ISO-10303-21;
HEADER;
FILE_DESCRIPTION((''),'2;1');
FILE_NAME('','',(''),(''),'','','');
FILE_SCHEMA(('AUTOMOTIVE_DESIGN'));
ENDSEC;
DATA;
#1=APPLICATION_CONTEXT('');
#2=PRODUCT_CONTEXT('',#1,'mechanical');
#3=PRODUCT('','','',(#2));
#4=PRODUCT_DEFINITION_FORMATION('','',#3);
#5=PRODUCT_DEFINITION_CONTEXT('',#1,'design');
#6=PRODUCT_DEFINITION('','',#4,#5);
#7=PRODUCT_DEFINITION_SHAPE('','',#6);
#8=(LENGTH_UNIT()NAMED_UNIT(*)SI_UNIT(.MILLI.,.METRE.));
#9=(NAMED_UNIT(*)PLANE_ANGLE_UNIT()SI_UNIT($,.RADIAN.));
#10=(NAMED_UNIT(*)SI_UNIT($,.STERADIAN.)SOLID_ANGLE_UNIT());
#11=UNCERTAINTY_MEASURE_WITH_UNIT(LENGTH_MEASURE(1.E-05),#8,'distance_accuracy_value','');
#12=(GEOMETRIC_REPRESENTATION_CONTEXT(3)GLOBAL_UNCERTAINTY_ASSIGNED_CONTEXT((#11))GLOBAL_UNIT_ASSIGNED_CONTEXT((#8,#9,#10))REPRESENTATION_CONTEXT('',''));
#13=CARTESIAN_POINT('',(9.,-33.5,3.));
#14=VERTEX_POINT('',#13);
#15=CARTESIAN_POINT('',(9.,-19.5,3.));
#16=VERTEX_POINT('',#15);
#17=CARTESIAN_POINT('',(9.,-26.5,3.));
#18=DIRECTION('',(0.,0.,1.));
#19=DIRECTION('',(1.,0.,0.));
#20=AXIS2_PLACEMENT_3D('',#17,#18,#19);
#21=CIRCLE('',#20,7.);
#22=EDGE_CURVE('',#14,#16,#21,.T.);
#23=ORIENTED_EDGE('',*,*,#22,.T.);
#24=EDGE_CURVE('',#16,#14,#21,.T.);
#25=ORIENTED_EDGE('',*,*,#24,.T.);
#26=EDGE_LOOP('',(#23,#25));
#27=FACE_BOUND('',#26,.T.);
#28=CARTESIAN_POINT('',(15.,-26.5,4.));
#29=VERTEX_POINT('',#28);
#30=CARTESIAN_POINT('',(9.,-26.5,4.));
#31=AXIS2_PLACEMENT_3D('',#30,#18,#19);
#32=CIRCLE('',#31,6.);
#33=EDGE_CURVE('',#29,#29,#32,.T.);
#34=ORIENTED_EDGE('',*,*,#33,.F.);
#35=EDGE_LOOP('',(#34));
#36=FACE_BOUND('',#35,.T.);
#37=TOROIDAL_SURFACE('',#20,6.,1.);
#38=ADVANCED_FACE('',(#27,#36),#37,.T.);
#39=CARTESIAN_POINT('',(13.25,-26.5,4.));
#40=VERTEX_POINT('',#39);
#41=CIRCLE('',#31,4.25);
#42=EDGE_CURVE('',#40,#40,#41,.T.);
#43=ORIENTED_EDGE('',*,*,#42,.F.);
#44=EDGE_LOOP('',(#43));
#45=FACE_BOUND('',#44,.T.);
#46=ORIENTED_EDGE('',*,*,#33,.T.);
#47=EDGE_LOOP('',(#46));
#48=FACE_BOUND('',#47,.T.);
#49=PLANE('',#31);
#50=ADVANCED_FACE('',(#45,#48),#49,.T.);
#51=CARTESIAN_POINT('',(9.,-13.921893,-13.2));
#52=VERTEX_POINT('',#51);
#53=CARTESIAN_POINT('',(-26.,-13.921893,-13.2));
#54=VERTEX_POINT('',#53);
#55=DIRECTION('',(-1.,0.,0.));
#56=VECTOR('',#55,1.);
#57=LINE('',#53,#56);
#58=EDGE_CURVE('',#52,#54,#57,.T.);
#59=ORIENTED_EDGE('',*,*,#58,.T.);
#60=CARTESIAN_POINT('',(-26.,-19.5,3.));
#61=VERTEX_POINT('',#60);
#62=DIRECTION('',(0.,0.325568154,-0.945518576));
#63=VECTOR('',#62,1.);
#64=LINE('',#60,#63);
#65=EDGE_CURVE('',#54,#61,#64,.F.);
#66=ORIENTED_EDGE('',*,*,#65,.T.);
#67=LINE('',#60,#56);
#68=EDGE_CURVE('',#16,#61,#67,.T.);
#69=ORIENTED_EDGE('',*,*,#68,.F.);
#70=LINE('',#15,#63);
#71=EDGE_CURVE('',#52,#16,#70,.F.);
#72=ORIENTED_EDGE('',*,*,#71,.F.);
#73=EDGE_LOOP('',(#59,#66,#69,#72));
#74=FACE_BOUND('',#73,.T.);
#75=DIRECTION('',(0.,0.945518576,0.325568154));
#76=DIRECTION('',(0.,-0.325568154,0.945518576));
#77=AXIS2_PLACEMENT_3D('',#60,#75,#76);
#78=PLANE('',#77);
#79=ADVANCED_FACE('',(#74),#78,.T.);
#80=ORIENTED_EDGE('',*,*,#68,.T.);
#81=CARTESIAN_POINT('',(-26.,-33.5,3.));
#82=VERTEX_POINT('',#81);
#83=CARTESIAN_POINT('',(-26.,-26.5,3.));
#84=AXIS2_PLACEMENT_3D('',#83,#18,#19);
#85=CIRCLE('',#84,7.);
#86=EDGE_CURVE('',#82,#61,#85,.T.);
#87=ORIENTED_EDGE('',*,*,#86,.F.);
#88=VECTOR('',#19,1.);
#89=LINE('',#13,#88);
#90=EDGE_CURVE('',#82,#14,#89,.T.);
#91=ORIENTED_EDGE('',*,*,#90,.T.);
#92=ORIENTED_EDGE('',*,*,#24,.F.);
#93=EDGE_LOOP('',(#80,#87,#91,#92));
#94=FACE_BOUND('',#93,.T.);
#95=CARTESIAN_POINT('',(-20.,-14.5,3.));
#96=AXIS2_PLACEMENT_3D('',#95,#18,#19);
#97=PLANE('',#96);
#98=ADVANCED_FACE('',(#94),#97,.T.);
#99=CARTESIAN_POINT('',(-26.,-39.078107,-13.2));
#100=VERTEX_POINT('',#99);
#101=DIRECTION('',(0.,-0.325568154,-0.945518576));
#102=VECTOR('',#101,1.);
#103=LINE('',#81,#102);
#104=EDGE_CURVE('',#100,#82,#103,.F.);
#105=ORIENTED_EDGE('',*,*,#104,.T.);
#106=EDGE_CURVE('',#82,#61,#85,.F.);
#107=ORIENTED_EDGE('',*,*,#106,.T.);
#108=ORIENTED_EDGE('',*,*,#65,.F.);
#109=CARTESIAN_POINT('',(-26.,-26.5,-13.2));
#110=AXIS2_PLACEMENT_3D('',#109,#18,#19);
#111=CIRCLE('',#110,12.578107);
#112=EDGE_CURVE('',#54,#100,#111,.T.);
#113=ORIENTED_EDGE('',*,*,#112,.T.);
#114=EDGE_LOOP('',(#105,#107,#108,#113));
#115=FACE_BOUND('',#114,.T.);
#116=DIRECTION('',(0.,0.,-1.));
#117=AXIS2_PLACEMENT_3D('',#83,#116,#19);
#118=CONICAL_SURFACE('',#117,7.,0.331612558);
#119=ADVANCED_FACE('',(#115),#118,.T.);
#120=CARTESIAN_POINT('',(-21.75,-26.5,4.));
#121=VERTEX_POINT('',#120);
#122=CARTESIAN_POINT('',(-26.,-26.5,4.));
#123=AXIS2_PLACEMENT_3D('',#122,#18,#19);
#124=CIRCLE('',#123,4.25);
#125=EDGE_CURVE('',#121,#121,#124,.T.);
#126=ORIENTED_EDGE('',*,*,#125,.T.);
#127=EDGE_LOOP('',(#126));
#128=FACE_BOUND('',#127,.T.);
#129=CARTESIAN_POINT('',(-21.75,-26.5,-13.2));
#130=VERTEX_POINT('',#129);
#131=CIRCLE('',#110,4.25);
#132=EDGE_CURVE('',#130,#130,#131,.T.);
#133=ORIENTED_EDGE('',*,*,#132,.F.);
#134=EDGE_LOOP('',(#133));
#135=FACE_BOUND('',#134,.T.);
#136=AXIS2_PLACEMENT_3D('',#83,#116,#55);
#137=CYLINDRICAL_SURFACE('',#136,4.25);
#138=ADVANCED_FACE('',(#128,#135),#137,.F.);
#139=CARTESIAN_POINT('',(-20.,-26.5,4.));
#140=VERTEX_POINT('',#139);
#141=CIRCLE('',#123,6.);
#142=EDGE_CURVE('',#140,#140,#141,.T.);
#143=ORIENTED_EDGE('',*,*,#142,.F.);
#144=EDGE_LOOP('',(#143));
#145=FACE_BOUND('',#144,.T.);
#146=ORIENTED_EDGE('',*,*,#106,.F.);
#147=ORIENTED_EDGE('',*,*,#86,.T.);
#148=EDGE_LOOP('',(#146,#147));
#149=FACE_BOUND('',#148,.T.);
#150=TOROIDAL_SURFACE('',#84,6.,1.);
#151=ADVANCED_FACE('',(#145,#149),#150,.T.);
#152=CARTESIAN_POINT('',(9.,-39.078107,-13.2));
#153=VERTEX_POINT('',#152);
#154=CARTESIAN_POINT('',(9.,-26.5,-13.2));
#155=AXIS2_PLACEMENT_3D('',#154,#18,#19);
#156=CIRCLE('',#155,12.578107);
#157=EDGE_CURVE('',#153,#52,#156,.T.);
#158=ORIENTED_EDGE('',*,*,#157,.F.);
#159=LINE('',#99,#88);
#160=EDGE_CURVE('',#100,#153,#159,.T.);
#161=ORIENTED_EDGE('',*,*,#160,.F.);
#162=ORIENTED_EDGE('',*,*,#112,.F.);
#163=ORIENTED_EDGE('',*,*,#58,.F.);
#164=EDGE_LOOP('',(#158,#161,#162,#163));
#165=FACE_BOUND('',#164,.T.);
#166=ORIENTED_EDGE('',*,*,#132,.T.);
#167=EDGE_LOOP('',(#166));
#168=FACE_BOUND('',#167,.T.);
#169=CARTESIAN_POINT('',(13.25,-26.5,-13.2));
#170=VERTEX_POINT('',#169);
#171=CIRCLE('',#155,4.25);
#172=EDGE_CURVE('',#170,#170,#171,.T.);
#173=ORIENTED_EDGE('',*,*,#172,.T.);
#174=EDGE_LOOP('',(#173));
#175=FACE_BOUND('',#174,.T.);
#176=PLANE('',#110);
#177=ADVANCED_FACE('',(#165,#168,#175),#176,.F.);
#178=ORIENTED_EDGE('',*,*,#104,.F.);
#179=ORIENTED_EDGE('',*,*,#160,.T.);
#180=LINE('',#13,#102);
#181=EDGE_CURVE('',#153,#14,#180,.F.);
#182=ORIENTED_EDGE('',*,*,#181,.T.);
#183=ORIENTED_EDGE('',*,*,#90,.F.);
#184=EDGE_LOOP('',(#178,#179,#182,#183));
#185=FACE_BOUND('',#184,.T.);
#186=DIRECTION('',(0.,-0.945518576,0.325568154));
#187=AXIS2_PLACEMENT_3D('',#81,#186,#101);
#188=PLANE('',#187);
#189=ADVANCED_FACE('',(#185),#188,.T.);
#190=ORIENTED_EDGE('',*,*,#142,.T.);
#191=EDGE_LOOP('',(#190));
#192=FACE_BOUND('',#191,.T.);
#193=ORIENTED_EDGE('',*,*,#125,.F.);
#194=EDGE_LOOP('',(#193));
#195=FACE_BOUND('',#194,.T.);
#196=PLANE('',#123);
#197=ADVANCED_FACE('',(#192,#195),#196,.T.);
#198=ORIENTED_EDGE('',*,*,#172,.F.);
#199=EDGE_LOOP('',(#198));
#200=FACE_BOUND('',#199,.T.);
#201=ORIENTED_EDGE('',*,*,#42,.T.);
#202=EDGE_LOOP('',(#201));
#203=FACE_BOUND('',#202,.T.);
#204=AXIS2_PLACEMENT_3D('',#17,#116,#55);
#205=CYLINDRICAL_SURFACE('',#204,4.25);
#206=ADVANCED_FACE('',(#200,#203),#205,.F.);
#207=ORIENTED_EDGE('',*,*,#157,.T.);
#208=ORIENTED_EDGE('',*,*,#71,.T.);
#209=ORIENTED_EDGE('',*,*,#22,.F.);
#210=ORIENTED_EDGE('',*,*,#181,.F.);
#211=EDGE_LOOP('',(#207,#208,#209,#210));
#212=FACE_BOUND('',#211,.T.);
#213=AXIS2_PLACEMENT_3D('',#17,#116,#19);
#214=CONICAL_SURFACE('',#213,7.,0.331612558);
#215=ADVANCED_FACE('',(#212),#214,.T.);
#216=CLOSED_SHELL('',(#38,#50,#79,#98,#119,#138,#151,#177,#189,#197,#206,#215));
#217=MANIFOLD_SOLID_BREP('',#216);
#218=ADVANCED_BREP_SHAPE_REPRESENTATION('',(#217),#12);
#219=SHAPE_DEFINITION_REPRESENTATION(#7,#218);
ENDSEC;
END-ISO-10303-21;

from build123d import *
from build123d.topology import SkipClean

# Parameters (mm, degrees)
SKETCH1_R           = 4.25
SKETCH1_W           = 20
SKETCH1_H           = 5
BOSS_EXTRUDE1_DEPTH = 3
SKETCH2_R           = 7
SKETCH2_R_2         = 4.25
BOSS_EXTRUDE2_DEPTH = 1
FILLET1_R           = 1
CUT_EXTRUDE1_DEPTH  = 48.11952886
BOSS_EXTRUDE3_DEPTH = 16.2
BOSS_EXTRUDE3_DRAFT = 19
SKETCH5_R           = 4.25
CUT_EXTRUDE2_DEPTH  = 58.252151387


with BuildPart() as part:
    # Sketch1 → Boss-Extrude1 (new body)
    with BuildSketch(Plane.XY):
        with BuildLine():
            Line((9, -33.5), (-26, -33.5))
            ThreePointArc((-26, -33.5), (-33, -26.5), (-26, -19.5))
            Line((-26, -19.5), (-20, -19.5))
            ThreePointArc((-20, -19.5), (-16.464466094, -18.035533906), (-15, -14.5))
            Line((-15, -14.5), (-15, 28.5))
            ThreePointArc((-15, 28.5), (-13.535533906, 32.035533906), (-10, 33.5))
            Line((-10, 33.5), (10, 33.5))
            ThreePointArc((10, 33.5), (13.535533906, 32.035533906), (15, 28.5))
            Line((15, 28.5), (15, -22.894448725))
            ThreePointArc((15, -22.894448725), (15.092571663, -29.946820352), (9, -33.5))
        make_face()
        with Locations((9, -26.5)):
            Circle(SKETCH1_R, mode=Mode.SUBTRACT)
        with Locations((-26, -26.5)):
            Circle(SKETCH1_R, mode=Mode.SUBTRACT)
        with Locations((0, 26)):
            Rectangle(SKETCH1_W, SKETCH1_H, mode=Mode.SUBTRACT)
    extrude(amount=BOSS_EXTRUDE1_DEPTH)

    # Sketch2 → Boss-Extrude2 (add)
    # profile 1 of 2: a face of its own
    with BuildSketch(Plane.XY.offset(3)):
        with Locations(Location((-26, -26.5, 0), (0, 0, 270))):
            Circle(SKETCH2_R)
        with Locations((-26, -26.5)):
            Circle(SKETCH2_R_2, mode=Mode.SUBTRACT)
    # profile 2 of 2: a face of its own
    with BuildSketch(Plane.XY.offset(3)):
        with Locations(Location((9, -26.5, 0), (0, 0, 270))):
            Circle(SKETCH2_R)
        with Locations((9, -26.5)):
            Circle(SKETCH2_R_2, mode=Mode.SUBTRACT)
    extrude(amount=BOSS_EXTRUDE2_DEPTH)

    # Fillet1
    fillet1_edges = [part.edges().sort_by_distance(p)[0] for p in [
        (-26, -19.5, 4),
        (9, -19.5, 4),
    ]]
    fillet(fillet1_edges, radius=FILLET1_R - 0.0001)  # a hair under: the kernel refuses the full size

    # Sketch3 → Cut-Extrude1 (cut, through all)
    with SkipClean():  # the faces are left unmerged after this step: merging them gives an invalid solid
        with BuildSketch(Plane.XY.offset(3)):
            with BuildLine():
                Line((-20, -19.5), (9, -19.5))
                ThreePointArc((9, -19.5), (12.446820352, -20.407428337), (15, -22.894448725))
                Line((15, -22.894448725), (15, 33.5))
                Line((15, 33.5), (-20, 33.5))
                Line((-20, 33.5), (-20, -19.5))
            make_face()
        extrude(amount=-CUT_EXTRUDE1_DEPTH, mode=Mode.SUBTRACT)


with BuildPart() as boss_extrude3_tool:
    # Sketch4 → Boss-Extrude3 (with draft: the straight prism first)
    with BuildSketch(Plane.XY.offset(3)):
        with BuildLine():
            ThreePointArc((-26, -19.5), (-33, -26.5), (-26, -33.5))
            Line((-26, -33.5), (9, -33.5))
            ThreePointArc((9, -33.5), (16, -26.5), (9, -19.5))
            Line((9, -19.5), (-26, -19.5))
        make_face()
    extrude(amount=-BOSS_EXTRUDE3_DEPTH)
    # Boss-Extrude3: the draft: its side faces are tilted about the plane it starts from
    boss_extrude3_sides = [boss_extrude3_tool.faces().sort_by_distance(p)[0] for p in [
        (-33, -26.5, -5.1),
        (-8.5, -33.5, -5.1),
        (16, -26.5, -5.1),
        (-8.5, -19.5, -5.1),
    ]]
    draft(boss_extrude3_sides, Plane.XY.offset(3), BOSS_EXTRUDE3_DRAFT)


with BuildPart() as part_1:
    add(part.part)

    # Boss-Extrude3: add boss_extrude3_tool
    add(boss_extrude3_tool.part)

    # Sketch5 → Cut-Extrude2 (cut, through all)
    with BuildSketch(Plane.XY.offset(3)):
        with Locations((-26, -26.5)):
            Circle(SKETCH5_R)
        with Locations((9, -26.5)):
            Circle(SKETCH5_R)
    extrude(amount=-CUT_EXTRUDE2_DEPTH, mode=Mode.SUBTRACT)


solid = part_1.part
